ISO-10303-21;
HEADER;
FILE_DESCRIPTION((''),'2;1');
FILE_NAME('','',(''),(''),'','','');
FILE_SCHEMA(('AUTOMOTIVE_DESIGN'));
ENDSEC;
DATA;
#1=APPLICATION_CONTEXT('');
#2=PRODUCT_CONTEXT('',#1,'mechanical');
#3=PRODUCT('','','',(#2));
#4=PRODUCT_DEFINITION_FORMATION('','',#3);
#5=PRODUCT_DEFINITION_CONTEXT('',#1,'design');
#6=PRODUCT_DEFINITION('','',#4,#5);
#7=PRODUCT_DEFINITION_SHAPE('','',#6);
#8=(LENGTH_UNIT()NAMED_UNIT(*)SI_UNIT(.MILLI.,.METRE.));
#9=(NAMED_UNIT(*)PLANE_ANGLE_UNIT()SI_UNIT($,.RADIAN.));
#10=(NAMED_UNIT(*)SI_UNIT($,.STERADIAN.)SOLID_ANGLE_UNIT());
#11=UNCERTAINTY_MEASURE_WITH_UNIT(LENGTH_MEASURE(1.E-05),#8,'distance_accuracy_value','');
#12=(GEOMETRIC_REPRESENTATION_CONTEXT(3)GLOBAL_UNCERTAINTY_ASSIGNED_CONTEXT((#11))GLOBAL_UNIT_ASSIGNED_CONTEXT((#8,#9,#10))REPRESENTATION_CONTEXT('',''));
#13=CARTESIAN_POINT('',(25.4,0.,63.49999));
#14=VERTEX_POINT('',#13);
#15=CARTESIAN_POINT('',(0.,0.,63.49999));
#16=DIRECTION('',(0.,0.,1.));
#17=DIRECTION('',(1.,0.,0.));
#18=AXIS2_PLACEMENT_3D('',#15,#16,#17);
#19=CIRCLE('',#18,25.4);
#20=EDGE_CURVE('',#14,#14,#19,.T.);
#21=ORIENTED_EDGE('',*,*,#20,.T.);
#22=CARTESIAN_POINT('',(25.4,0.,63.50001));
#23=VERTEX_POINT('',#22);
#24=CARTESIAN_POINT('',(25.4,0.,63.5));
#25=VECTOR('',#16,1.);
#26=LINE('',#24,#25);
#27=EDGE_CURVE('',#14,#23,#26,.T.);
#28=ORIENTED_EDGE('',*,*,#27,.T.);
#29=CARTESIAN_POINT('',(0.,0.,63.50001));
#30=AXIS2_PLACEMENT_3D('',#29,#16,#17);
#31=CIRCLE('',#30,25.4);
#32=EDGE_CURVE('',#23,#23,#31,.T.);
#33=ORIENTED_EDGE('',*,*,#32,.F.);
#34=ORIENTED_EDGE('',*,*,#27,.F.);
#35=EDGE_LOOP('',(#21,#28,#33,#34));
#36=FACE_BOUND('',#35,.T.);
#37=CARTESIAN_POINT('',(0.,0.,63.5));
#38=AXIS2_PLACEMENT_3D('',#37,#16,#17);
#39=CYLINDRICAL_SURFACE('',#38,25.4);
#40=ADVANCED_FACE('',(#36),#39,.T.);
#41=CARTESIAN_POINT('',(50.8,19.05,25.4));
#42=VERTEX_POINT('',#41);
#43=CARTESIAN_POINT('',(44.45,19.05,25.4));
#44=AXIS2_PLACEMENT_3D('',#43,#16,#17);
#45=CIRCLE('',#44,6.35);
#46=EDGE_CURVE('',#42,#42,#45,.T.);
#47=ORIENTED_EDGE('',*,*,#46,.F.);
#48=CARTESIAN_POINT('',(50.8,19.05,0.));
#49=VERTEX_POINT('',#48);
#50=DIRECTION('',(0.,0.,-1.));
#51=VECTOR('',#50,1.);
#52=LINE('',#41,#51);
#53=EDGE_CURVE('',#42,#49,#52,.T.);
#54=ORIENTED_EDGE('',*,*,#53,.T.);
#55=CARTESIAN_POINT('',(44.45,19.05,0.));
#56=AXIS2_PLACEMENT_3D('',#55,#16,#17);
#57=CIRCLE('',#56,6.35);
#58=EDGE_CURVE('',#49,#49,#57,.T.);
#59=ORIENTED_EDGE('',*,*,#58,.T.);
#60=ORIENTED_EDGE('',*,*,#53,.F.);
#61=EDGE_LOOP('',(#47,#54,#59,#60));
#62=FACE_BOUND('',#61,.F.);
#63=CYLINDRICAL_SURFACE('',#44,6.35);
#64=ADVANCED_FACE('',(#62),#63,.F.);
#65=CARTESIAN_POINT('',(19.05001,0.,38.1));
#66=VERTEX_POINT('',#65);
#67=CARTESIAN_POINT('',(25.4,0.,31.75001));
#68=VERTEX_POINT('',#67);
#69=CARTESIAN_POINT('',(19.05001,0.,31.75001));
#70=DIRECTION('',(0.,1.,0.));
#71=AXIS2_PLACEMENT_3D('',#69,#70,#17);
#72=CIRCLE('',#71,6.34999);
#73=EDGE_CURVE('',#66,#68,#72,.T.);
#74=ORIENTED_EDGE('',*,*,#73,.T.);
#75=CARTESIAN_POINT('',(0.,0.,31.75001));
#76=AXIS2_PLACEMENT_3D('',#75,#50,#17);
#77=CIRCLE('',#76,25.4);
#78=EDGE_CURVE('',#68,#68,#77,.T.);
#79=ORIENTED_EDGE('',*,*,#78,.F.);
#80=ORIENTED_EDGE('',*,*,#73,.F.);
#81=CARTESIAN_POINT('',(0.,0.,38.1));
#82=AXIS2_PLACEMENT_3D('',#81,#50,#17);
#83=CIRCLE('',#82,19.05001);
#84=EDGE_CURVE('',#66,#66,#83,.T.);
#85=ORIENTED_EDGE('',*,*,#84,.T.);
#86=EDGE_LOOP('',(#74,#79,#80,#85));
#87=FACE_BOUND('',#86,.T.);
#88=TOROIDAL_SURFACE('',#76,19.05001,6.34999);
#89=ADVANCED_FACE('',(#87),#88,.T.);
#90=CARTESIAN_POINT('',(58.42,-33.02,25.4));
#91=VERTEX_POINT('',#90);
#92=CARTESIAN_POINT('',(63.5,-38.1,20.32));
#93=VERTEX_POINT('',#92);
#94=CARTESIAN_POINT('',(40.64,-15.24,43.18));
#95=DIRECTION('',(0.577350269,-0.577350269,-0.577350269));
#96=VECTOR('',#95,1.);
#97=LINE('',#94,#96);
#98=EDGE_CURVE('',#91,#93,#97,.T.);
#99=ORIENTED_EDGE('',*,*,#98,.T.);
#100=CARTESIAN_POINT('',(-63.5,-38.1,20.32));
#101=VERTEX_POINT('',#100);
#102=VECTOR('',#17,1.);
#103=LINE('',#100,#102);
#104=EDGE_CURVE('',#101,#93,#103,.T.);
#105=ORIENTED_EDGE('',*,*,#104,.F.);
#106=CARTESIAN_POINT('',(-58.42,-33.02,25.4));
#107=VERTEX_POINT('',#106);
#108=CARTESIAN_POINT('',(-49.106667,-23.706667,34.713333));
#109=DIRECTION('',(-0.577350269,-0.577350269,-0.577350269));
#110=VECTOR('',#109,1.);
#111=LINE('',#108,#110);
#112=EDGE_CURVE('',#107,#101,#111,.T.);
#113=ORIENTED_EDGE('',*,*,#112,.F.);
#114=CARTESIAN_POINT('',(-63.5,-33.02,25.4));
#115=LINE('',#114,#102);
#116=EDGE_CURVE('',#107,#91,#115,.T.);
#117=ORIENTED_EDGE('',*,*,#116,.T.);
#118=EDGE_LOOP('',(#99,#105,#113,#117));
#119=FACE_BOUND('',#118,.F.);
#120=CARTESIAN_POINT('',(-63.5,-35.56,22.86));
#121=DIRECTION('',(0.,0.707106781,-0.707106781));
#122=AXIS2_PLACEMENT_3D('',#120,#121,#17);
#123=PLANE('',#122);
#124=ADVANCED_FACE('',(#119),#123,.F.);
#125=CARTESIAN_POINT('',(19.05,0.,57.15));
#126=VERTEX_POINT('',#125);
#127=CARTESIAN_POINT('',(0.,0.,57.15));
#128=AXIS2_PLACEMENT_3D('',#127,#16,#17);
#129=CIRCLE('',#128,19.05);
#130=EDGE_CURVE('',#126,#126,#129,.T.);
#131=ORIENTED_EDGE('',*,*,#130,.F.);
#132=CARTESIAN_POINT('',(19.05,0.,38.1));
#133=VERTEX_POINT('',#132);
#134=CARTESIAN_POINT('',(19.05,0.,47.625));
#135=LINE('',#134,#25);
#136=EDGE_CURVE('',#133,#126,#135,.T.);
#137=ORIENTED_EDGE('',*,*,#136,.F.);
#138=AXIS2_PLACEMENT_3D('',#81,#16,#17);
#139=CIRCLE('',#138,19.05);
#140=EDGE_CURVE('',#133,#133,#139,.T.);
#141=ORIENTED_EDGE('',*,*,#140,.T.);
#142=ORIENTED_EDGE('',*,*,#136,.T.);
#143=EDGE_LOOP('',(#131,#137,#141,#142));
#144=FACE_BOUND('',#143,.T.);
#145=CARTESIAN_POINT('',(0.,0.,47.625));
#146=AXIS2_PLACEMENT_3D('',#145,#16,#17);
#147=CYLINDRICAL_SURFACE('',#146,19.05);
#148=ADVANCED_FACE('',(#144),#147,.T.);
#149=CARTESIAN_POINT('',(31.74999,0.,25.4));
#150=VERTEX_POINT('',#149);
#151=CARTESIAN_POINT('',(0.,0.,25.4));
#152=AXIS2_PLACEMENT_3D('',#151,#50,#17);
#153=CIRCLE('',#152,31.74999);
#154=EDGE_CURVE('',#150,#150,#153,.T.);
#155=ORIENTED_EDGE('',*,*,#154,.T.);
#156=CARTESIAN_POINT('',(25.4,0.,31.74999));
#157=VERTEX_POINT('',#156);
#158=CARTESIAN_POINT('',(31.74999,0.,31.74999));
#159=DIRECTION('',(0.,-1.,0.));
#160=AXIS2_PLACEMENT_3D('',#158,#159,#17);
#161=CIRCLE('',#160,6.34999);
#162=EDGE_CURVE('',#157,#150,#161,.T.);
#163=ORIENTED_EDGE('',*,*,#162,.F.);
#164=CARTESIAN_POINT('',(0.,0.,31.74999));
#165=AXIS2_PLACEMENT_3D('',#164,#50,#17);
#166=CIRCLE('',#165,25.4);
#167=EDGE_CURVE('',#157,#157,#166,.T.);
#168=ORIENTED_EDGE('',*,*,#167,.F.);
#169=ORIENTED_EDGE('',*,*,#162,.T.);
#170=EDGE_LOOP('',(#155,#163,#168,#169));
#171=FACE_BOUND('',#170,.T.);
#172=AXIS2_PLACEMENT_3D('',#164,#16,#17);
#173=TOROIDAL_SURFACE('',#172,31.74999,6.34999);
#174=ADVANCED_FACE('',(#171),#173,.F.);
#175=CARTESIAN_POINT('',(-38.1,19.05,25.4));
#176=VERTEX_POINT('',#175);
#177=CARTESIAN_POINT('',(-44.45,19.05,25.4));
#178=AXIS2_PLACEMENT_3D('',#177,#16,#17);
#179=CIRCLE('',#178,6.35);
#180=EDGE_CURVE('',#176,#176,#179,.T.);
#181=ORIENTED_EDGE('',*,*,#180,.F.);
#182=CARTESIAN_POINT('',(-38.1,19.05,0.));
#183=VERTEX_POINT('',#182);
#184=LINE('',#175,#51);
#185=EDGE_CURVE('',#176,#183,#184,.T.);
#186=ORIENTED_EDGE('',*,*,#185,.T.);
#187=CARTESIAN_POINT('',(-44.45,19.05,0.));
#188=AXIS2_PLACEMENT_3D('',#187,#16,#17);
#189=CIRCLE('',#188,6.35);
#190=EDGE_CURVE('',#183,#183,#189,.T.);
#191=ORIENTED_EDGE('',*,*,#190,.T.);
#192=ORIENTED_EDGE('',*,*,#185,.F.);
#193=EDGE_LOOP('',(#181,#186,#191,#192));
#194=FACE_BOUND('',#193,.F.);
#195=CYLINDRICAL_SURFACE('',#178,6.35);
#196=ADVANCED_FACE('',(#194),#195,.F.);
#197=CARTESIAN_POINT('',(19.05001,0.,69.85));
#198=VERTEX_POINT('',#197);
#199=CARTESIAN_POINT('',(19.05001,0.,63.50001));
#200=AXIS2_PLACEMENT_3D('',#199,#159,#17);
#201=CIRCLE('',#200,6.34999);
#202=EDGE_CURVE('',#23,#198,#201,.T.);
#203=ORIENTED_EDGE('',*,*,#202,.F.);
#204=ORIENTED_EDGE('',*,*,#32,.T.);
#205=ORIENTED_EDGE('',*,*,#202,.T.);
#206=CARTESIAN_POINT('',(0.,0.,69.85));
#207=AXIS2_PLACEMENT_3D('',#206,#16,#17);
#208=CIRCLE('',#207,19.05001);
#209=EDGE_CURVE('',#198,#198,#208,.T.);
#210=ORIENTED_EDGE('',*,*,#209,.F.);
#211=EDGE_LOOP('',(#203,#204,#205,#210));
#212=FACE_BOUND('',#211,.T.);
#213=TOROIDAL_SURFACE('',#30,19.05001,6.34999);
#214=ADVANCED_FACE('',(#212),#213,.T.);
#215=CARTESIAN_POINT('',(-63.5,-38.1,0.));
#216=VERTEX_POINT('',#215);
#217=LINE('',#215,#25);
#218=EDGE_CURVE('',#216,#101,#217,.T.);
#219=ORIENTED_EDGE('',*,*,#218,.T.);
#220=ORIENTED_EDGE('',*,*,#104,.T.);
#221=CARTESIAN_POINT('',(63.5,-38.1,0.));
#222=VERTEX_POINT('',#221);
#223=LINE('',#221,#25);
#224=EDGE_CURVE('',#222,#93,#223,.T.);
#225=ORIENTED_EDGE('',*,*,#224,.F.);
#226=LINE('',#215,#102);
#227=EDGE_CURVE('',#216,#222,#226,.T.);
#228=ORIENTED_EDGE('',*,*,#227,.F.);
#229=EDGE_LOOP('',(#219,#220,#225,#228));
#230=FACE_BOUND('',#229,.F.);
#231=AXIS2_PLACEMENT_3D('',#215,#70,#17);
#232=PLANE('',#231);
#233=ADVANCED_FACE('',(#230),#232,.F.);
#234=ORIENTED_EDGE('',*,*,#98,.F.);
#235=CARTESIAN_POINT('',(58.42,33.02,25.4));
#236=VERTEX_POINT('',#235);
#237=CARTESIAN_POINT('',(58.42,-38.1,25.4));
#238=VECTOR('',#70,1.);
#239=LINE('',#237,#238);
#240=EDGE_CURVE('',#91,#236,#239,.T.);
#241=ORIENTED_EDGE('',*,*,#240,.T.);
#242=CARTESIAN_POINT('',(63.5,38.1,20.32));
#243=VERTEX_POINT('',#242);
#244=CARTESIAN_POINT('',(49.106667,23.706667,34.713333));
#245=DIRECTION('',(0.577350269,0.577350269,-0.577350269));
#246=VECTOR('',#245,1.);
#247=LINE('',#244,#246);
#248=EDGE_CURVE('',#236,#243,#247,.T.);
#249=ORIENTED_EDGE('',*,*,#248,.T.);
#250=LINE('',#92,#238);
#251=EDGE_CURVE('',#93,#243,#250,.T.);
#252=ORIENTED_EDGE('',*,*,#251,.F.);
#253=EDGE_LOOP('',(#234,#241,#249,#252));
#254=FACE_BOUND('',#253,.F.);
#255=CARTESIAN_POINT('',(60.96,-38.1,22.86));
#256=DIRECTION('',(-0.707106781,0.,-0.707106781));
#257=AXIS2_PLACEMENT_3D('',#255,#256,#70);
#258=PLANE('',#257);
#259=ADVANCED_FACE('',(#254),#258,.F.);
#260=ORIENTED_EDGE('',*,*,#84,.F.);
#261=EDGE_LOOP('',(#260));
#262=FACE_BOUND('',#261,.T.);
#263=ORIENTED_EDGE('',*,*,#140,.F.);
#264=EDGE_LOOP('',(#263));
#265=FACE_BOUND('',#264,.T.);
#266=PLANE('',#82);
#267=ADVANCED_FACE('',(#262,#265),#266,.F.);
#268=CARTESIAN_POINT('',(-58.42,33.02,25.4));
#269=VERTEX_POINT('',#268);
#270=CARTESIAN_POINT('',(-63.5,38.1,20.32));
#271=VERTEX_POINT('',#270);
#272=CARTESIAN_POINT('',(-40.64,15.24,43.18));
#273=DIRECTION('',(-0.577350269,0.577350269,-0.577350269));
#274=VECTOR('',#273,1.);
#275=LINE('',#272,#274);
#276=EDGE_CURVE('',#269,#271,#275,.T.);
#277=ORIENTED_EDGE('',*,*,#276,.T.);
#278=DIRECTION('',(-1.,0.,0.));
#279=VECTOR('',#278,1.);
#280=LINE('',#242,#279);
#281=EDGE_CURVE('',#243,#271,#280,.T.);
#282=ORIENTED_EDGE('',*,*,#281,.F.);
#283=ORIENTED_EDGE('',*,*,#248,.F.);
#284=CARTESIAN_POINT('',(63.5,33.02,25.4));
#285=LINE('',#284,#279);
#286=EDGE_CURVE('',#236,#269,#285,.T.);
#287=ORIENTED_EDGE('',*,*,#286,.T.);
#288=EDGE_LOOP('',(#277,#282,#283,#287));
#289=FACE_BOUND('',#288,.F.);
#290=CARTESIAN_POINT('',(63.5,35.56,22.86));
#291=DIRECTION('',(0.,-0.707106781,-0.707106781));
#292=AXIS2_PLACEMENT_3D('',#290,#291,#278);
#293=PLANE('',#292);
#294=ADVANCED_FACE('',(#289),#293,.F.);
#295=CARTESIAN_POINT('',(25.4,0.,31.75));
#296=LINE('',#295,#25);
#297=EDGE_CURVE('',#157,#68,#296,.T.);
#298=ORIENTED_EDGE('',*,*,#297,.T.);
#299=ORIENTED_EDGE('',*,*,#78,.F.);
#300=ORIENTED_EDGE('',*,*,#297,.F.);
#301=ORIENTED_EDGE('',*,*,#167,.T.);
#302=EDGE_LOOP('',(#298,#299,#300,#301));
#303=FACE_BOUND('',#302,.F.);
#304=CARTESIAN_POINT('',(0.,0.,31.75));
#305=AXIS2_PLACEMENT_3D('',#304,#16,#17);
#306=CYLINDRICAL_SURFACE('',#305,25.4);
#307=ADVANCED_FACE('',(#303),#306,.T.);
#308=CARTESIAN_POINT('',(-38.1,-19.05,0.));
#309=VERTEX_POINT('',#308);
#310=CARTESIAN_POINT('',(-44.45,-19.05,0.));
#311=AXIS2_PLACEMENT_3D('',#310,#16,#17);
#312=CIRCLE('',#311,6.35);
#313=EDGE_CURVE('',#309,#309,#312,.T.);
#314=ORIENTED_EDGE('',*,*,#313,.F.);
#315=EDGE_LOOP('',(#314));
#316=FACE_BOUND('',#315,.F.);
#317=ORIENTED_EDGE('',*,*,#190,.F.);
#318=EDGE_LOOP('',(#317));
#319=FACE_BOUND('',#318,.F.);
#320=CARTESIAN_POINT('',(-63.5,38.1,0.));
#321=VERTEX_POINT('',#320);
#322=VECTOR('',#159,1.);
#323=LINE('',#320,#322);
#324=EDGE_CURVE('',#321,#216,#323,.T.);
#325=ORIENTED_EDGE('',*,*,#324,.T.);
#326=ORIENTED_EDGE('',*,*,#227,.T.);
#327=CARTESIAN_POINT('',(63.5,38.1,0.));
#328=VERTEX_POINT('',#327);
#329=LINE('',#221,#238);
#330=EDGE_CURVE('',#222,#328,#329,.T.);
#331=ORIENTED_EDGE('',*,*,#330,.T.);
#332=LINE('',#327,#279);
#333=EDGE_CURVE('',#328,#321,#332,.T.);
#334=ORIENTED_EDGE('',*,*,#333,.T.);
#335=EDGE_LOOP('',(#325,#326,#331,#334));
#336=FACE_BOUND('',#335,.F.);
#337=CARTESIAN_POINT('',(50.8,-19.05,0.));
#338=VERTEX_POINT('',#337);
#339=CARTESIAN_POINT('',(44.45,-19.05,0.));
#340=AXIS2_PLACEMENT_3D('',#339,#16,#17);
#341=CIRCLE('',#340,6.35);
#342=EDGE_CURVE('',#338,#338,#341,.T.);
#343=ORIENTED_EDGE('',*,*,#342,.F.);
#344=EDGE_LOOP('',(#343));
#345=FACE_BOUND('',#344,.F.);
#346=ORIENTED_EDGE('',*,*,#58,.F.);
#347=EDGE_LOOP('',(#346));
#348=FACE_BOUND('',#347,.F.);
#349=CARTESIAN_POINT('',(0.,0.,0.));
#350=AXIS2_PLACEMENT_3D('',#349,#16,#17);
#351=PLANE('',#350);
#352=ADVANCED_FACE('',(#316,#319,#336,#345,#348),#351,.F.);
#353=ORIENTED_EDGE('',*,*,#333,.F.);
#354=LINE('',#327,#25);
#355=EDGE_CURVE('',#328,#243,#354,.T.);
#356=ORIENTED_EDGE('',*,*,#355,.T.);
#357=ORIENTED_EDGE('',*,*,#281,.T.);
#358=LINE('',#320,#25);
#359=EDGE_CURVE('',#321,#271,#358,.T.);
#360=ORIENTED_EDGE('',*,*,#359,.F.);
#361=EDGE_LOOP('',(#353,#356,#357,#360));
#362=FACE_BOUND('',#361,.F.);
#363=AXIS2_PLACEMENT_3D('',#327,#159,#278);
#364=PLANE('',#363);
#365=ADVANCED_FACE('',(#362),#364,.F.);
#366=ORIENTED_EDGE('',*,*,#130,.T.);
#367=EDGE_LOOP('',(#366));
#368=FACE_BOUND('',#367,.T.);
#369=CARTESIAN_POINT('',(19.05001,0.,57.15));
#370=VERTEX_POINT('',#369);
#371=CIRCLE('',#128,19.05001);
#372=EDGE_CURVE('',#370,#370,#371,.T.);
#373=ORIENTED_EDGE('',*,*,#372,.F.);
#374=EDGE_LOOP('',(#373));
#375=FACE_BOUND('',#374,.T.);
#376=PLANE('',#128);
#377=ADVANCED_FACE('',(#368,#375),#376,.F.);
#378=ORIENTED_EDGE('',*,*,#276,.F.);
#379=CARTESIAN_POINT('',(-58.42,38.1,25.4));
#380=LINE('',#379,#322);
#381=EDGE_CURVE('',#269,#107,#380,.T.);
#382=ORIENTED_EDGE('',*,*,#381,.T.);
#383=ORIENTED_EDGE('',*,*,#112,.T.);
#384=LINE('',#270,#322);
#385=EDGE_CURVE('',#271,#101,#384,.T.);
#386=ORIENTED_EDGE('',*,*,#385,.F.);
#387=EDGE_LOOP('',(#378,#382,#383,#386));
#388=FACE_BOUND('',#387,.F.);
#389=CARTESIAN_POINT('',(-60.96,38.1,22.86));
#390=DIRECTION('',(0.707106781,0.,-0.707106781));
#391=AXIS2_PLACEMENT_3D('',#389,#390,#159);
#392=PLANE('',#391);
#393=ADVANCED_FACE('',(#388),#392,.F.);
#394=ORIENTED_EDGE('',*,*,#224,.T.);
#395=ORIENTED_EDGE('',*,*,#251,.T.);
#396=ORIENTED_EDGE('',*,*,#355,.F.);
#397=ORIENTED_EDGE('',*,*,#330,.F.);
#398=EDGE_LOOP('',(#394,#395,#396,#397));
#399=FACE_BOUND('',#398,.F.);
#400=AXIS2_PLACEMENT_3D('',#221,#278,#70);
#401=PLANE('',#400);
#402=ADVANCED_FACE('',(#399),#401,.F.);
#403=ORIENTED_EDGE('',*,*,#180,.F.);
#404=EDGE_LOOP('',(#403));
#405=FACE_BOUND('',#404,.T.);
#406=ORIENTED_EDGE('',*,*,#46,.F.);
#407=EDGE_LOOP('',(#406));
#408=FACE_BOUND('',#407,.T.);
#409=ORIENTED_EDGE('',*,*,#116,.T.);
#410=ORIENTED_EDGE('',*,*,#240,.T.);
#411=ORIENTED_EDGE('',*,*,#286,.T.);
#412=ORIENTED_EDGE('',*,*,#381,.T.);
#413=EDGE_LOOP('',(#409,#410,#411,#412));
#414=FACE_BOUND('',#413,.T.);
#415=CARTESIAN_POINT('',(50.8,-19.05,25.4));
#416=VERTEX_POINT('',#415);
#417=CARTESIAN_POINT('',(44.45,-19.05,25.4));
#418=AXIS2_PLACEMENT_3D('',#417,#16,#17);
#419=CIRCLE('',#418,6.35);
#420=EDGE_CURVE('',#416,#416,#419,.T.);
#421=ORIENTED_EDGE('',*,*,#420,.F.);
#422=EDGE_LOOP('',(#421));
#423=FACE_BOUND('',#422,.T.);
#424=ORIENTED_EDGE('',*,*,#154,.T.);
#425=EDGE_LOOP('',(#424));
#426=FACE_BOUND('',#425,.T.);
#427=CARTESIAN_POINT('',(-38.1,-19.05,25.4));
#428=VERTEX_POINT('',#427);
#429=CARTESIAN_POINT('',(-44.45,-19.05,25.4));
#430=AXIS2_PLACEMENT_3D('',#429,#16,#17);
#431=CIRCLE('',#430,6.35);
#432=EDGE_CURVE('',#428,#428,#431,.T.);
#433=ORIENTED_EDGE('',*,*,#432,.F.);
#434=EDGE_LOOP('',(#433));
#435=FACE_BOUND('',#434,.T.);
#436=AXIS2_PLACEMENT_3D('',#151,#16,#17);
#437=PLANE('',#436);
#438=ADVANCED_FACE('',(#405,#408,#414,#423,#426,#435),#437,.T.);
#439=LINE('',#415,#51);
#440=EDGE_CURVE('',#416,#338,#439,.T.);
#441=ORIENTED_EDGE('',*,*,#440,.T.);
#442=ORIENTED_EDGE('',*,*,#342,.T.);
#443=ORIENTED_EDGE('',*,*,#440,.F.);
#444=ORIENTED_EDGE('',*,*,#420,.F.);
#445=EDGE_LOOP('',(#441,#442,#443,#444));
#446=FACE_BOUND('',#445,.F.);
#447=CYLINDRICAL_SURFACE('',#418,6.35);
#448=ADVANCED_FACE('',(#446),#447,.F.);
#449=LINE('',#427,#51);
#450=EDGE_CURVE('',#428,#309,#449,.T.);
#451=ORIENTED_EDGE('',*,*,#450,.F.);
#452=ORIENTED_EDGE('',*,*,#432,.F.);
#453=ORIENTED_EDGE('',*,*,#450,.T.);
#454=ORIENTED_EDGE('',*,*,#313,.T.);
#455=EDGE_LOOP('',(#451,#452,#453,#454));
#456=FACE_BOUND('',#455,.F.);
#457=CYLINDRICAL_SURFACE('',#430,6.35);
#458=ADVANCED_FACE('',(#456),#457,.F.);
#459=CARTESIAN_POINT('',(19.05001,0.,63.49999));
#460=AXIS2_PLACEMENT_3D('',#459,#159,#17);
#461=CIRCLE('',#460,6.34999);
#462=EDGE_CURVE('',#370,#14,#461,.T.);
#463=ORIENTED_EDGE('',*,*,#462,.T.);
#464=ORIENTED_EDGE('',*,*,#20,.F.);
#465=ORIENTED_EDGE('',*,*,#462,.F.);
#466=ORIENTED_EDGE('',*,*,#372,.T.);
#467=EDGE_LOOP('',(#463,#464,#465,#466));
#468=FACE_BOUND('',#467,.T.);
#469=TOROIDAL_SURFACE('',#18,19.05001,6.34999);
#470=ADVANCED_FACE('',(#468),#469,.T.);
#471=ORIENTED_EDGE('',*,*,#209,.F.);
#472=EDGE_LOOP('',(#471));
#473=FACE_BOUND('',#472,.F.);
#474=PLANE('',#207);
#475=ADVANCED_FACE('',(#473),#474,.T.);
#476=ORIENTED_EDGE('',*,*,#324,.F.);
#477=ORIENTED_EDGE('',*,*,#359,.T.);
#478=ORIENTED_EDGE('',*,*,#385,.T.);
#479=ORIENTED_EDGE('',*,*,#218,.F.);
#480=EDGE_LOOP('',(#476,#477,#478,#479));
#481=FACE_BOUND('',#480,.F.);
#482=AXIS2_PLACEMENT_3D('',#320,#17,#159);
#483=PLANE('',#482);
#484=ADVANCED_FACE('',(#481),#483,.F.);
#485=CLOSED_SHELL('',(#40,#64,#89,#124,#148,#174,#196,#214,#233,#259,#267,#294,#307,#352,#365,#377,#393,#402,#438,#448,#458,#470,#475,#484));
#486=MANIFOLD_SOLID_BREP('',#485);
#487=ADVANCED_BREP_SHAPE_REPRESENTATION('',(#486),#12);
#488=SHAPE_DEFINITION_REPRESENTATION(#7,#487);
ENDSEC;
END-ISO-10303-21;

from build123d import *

# Parameters (mm, degrees)
F1_DEPTH = 25.4
F2_R     = 6.35
F3_DEPTH = 25.4
F4_W     = 25.4
F4_H     = 12.7
F6_W     = 19.05
F6_H     = 19.05
F8_W     = 25.4
F8_H     = 12.7
F11_R    = 6.34999
F12_SIZE = 5.08


# Not quite as in the source:
# - a fillet or chamfer is up to 0.001 mm smaller than in the source, because OpenCascade refuses the exact size
# - a feature of the source that left no trace in its solid (it failed there, or was rolled back) is left out


with BuildPart() as f1:
    # F0 (on Top) → F1 (new body)
    with BuildSketch(Plane.XY):
        Polygon((-63.0538856602, 38.1), (-63.5, 38.1), (-63.5, -38.1), (63.5, -38.1), (63.5, 38.1), align=None)
    extrude(amount=F1_DEPTH)

    # F2 (on face) → F3 (cut)
    with BuildSketch(Plane.XY.offset(25.4)):
        with Locations((-44.45, 19.05)):
            Circle(F2_R)
        with Locations((-44.45, -19.05)):
            Circle(F2_R)
        with Locations((44.45, 19.05)):
            Circle(F2_R)
        with Locations((44.45, -19.05)):
            Circle(F2_R)
    extrude(amount=-F3_DEPTH, mode=Mode.SUBTRACT)

    # F4 (on Front) → F5 (revolve)
    with BuildSketch(Plane.XZ):
        with Locations((12.7, 31.75)):
            Rectangle(F4_W, F4_H)
    revolve(axis=Axis((0, 0, 31.75), (0, 0, -1)))

    # F6 (on Front) → F7 (revolve)
    with BuildSketch(Plane.XZ):
        with Locations((9.525, 47.625)):
            Rectangle(F6_W, F6_H)
    revolve(axis=Axis((0, 0, 47.625), (0, 0, 1)))

    # F8 (on Front) → F9 (revolve)
    with BuildSketch(Plane.XZ):
        with Locations((12.7, 63.5)):
            Rectangle(F8_W, F8_H)
    revolve(axis=Axis((0, 0, 63.5), (0, 0, 1)))

    # F11 (radius 6.35 in the source; OpenCascade refuses exactly that, so slightly less here)
    f11_edges = [f1.edges().sort_by_distance(p)[0] for p in [
        (-25.4, 0, 69.85),
        (-25.4, 0, 38.1),
        (-25.4, 0, 57.15),
        (-25.4, 0, 25.4),
        (25.4, 0, 31.75),
    ]]
    fillet(f11_edges, radius=F11_R)

    # F12
    f12_edges = [f1.edges().sort_by_distance(p)[0] for p in [
        (-63.5, 0, 25.4),
        (0, 38.1, 25.4),
        (0, -38.1, 25.4),
        (63.5, 0, 25.4),
    ]]
    chamfer(f12_edges, length=F12_SIZE)


solid = f1.part
